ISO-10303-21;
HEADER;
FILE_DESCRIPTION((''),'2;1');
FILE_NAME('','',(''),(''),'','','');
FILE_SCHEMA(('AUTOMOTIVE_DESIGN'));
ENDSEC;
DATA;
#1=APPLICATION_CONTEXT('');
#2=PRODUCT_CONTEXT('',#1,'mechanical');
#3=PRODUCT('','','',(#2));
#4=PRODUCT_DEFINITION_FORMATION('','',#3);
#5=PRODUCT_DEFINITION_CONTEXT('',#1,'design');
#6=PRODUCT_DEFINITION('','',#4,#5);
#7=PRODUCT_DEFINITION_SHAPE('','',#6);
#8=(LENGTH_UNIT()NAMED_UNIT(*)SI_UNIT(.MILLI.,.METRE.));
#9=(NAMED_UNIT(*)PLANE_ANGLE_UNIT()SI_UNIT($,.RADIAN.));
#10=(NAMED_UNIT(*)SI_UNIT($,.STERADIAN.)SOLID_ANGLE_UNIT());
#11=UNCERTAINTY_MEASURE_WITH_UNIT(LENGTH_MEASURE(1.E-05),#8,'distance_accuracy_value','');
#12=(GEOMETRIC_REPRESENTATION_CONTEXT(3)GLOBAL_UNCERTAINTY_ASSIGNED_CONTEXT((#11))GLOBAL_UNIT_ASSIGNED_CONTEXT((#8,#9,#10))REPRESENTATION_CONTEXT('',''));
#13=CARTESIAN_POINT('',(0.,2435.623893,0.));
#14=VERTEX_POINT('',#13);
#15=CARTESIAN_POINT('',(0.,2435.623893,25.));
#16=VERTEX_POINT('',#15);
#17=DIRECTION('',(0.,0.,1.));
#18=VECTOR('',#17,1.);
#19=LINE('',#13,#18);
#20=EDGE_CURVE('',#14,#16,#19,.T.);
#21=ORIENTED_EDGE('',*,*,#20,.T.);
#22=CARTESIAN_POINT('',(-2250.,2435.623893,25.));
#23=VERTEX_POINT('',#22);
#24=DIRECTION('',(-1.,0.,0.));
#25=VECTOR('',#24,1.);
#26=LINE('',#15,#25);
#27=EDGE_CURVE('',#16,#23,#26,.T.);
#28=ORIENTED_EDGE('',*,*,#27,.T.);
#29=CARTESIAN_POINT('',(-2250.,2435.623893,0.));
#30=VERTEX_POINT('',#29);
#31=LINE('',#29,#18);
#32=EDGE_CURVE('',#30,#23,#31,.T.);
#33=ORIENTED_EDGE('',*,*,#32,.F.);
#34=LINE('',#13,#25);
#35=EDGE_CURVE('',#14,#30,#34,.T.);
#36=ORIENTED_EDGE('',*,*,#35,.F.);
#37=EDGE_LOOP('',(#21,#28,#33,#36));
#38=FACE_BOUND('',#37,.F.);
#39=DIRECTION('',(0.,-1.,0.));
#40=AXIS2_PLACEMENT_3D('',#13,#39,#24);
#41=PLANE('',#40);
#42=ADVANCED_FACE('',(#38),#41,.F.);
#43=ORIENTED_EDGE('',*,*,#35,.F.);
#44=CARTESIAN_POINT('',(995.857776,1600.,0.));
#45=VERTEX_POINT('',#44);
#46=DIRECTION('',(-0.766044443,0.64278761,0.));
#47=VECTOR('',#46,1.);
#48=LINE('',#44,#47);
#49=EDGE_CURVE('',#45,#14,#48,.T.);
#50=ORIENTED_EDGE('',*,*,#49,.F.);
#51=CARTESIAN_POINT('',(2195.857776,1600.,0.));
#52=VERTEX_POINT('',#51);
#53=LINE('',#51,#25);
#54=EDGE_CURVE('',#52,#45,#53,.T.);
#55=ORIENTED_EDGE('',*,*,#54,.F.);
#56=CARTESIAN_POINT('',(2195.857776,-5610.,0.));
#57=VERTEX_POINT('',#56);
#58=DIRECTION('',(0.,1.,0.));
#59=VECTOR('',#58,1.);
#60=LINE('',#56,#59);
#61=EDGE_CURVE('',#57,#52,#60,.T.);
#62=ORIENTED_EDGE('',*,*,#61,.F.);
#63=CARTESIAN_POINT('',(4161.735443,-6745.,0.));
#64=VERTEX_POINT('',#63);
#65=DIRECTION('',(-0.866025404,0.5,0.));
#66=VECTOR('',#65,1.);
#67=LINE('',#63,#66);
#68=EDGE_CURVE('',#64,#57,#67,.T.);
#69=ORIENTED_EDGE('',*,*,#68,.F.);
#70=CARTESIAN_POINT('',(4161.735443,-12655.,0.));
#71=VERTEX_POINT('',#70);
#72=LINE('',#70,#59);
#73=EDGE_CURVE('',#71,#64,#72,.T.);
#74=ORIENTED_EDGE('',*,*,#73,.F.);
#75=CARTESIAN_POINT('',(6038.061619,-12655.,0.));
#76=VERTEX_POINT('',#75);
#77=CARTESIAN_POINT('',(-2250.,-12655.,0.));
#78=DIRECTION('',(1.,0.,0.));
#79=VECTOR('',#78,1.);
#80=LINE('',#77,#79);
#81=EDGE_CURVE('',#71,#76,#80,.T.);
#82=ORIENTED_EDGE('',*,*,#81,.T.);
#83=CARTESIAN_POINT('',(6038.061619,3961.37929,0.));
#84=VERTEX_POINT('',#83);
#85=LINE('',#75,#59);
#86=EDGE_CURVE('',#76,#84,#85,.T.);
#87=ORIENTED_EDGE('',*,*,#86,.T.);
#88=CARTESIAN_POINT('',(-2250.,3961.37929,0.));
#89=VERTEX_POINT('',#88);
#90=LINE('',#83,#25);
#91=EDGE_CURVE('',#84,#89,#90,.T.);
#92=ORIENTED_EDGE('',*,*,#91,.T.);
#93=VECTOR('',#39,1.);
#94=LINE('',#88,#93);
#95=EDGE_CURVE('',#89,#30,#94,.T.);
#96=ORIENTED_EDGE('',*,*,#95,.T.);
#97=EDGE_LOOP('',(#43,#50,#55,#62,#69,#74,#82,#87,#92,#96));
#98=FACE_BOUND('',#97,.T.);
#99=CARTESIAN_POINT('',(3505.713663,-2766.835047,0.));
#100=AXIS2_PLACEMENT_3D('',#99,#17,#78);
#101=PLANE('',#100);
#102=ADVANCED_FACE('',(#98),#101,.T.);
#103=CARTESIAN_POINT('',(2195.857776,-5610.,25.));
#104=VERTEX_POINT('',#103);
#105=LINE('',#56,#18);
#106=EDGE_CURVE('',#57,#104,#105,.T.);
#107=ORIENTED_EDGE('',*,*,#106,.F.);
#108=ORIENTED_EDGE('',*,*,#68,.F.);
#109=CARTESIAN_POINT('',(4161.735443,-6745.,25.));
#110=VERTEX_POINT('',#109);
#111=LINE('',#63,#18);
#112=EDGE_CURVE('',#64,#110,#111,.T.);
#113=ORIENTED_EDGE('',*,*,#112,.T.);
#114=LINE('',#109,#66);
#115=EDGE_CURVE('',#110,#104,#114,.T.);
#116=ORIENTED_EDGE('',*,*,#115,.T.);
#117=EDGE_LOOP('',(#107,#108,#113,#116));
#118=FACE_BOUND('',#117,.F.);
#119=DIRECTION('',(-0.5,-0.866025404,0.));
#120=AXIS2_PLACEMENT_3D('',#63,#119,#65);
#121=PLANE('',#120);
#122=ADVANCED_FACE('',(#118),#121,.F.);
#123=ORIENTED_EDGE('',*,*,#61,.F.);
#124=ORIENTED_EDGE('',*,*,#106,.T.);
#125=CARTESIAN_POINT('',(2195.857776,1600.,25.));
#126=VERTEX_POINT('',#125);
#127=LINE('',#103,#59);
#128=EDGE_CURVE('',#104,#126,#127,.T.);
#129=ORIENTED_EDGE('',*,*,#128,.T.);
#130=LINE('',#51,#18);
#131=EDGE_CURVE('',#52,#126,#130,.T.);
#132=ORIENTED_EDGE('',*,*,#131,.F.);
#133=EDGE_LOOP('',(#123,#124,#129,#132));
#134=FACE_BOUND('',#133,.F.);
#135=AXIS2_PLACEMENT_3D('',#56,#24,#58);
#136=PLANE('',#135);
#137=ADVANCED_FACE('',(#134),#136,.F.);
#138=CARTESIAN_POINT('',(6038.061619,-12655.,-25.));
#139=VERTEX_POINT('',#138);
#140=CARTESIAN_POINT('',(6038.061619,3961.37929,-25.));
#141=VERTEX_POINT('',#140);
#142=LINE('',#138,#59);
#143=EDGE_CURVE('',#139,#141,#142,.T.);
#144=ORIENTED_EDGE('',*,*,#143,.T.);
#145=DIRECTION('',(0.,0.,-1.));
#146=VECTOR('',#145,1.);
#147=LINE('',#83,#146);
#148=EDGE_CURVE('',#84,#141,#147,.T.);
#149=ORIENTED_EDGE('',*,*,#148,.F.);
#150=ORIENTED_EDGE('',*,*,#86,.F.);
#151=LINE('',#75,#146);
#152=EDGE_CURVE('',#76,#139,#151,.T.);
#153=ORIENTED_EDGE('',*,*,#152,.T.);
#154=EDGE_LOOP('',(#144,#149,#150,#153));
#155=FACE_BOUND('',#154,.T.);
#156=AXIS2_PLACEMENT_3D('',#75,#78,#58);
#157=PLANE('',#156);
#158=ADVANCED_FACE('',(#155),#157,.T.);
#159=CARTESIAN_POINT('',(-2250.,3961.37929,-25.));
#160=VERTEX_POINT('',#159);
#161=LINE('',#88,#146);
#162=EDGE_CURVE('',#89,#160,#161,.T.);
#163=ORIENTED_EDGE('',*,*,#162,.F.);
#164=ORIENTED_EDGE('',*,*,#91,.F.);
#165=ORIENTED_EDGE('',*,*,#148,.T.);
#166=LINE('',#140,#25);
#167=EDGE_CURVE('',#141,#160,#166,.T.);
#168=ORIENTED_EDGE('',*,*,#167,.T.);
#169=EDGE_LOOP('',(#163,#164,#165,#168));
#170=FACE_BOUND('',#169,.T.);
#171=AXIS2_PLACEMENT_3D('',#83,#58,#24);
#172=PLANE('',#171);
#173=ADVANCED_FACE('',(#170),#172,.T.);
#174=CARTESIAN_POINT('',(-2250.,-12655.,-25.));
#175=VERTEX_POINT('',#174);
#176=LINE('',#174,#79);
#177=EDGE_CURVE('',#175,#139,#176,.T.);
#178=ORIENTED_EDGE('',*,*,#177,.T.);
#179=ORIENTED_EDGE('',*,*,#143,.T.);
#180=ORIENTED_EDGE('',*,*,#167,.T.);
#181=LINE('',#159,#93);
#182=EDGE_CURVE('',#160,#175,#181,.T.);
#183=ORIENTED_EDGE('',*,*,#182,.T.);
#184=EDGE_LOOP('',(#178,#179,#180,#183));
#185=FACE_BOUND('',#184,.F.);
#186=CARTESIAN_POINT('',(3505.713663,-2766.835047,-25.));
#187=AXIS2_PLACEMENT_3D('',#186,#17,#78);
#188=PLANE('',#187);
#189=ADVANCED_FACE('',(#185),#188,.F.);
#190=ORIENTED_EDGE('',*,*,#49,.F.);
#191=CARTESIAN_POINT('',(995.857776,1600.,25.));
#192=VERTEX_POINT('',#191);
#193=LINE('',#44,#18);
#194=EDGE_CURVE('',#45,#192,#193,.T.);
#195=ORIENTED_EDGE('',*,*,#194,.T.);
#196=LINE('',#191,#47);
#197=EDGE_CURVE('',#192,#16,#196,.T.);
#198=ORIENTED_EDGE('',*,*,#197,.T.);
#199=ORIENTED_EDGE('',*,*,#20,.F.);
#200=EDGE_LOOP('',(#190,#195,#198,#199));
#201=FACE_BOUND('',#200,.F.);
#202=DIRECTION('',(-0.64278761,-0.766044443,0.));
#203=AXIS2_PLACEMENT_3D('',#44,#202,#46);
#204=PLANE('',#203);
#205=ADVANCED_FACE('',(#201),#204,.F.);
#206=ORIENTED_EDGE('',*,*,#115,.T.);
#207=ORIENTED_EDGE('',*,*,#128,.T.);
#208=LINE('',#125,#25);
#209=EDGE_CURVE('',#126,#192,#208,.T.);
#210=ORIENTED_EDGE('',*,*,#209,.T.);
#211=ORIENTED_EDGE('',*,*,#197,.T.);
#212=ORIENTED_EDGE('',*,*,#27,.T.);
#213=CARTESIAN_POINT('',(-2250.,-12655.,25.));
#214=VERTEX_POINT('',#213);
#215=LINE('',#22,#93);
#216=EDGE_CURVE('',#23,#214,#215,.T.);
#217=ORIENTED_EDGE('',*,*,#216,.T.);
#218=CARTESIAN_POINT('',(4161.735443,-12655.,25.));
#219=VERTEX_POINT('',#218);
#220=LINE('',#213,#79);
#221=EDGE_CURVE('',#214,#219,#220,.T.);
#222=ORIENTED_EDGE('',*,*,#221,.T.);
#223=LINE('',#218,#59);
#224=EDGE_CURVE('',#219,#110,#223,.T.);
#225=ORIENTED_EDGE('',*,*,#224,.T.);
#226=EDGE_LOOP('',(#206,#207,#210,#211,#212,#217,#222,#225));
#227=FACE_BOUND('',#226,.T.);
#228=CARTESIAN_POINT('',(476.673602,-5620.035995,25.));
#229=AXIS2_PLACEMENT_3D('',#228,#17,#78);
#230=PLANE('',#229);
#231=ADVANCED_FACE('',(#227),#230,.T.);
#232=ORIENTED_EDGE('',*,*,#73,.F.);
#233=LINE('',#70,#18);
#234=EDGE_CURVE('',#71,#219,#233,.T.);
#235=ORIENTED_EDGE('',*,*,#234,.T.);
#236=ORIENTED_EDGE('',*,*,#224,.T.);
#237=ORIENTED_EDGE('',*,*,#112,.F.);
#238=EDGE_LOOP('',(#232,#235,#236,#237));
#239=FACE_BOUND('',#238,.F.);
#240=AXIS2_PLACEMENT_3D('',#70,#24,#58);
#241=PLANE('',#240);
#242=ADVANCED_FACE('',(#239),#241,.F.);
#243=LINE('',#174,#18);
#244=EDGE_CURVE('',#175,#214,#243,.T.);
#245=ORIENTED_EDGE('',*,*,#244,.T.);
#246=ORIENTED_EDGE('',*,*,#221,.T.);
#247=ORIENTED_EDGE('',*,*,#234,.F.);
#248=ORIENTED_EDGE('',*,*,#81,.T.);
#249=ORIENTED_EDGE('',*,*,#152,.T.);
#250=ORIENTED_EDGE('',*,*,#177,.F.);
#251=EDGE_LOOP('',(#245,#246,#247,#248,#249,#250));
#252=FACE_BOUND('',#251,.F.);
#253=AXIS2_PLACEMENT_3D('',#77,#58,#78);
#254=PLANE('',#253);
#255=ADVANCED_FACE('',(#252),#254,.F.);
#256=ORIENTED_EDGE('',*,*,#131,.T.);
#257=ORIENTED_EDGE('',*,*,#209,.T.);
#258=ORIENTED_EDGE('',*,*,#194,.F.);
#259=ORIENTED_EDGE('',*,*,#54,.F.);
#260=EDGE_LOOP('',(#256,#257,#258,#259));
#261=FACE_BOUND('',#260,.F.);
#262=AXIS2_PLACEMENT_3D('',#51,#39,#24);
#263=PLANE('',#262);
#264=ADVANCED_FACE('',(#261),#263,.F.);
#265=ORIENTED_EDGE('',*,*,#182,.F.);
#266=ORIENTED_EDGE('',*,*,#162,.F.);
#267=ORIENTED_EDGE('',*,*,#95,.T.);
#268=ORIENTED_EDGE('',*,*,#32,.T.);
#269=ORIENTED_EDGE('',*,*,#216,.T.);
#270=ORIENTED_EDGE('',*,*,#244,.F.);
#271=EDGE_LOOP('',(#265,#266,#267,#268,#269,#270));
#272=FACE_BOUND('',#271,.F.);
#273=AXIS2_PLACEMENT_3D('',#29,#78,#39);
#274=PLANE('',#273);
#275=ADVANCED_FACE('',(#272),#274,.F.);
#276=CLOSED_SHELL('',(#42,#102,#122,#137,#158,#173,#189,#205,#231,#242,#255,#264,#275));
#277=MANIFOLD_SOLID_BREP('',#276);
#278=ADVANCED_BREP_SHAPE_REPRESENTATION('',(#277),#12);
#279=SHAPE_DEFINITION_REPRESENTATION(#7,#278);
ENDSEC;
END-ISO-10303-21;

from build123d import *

# Parameters (mm, degrees)
F3_DEPTH = 25
F5_DEPTH = 25


# Not quite as in the source:
# - the program builds the solid bodies; features that only make, move or delete a surface that nothing else refers to are left out


with BuildPart() as f3:
    # F0 (on Top) → F3 (new body)
    with BuildSketch(Plane.XY):
        Polygon((-2250, 3961.3792896271), (-2250, 2435.6238925925), (0, 2435.6238925925), (995.8577760547, 1600), (2195.8577760547, 1600), (2195.8577760547, 600), (2195.8577760547, 0), (2195.8577760547, -5610), (4161.7354426453, -6745), (4161.7354426453, -12655), (6038.0616188049, -12655), (6038.0616188049, 3961.3792896271), align=None)
        Polygon((0, 2435.6238925925), (-2250, 2435.6238925925), (-2250, -12655), (4161.7354426453, -12655), (4161.7354426453, -6745), (2195.8577760547, -5610), (2195.8577760547, 0), (2195.8577760547, 600), (2195.8577760547, 1600), (995.8577760547, 1600), align=None)
    extrude(amount=-F3_DEPTH)

    # F0 (on Top) → F5 (join)
    with BuildSketch(Plane.XY):
        Polygon((0, 2435.6238925925), (-2250, 2435.6238925925), (-2250, -12655), (4161.7354426453, -12655), (4161.7354426453, -6745), (2195.8577760547, -5610), (2195.8577760547, 0), (2195.8577760547, 600), (2195.8577760547, 1600), (995.8577760547, 1600), align=None)
    extrude(amount=F5_DEPTH)


solid = f3.part
